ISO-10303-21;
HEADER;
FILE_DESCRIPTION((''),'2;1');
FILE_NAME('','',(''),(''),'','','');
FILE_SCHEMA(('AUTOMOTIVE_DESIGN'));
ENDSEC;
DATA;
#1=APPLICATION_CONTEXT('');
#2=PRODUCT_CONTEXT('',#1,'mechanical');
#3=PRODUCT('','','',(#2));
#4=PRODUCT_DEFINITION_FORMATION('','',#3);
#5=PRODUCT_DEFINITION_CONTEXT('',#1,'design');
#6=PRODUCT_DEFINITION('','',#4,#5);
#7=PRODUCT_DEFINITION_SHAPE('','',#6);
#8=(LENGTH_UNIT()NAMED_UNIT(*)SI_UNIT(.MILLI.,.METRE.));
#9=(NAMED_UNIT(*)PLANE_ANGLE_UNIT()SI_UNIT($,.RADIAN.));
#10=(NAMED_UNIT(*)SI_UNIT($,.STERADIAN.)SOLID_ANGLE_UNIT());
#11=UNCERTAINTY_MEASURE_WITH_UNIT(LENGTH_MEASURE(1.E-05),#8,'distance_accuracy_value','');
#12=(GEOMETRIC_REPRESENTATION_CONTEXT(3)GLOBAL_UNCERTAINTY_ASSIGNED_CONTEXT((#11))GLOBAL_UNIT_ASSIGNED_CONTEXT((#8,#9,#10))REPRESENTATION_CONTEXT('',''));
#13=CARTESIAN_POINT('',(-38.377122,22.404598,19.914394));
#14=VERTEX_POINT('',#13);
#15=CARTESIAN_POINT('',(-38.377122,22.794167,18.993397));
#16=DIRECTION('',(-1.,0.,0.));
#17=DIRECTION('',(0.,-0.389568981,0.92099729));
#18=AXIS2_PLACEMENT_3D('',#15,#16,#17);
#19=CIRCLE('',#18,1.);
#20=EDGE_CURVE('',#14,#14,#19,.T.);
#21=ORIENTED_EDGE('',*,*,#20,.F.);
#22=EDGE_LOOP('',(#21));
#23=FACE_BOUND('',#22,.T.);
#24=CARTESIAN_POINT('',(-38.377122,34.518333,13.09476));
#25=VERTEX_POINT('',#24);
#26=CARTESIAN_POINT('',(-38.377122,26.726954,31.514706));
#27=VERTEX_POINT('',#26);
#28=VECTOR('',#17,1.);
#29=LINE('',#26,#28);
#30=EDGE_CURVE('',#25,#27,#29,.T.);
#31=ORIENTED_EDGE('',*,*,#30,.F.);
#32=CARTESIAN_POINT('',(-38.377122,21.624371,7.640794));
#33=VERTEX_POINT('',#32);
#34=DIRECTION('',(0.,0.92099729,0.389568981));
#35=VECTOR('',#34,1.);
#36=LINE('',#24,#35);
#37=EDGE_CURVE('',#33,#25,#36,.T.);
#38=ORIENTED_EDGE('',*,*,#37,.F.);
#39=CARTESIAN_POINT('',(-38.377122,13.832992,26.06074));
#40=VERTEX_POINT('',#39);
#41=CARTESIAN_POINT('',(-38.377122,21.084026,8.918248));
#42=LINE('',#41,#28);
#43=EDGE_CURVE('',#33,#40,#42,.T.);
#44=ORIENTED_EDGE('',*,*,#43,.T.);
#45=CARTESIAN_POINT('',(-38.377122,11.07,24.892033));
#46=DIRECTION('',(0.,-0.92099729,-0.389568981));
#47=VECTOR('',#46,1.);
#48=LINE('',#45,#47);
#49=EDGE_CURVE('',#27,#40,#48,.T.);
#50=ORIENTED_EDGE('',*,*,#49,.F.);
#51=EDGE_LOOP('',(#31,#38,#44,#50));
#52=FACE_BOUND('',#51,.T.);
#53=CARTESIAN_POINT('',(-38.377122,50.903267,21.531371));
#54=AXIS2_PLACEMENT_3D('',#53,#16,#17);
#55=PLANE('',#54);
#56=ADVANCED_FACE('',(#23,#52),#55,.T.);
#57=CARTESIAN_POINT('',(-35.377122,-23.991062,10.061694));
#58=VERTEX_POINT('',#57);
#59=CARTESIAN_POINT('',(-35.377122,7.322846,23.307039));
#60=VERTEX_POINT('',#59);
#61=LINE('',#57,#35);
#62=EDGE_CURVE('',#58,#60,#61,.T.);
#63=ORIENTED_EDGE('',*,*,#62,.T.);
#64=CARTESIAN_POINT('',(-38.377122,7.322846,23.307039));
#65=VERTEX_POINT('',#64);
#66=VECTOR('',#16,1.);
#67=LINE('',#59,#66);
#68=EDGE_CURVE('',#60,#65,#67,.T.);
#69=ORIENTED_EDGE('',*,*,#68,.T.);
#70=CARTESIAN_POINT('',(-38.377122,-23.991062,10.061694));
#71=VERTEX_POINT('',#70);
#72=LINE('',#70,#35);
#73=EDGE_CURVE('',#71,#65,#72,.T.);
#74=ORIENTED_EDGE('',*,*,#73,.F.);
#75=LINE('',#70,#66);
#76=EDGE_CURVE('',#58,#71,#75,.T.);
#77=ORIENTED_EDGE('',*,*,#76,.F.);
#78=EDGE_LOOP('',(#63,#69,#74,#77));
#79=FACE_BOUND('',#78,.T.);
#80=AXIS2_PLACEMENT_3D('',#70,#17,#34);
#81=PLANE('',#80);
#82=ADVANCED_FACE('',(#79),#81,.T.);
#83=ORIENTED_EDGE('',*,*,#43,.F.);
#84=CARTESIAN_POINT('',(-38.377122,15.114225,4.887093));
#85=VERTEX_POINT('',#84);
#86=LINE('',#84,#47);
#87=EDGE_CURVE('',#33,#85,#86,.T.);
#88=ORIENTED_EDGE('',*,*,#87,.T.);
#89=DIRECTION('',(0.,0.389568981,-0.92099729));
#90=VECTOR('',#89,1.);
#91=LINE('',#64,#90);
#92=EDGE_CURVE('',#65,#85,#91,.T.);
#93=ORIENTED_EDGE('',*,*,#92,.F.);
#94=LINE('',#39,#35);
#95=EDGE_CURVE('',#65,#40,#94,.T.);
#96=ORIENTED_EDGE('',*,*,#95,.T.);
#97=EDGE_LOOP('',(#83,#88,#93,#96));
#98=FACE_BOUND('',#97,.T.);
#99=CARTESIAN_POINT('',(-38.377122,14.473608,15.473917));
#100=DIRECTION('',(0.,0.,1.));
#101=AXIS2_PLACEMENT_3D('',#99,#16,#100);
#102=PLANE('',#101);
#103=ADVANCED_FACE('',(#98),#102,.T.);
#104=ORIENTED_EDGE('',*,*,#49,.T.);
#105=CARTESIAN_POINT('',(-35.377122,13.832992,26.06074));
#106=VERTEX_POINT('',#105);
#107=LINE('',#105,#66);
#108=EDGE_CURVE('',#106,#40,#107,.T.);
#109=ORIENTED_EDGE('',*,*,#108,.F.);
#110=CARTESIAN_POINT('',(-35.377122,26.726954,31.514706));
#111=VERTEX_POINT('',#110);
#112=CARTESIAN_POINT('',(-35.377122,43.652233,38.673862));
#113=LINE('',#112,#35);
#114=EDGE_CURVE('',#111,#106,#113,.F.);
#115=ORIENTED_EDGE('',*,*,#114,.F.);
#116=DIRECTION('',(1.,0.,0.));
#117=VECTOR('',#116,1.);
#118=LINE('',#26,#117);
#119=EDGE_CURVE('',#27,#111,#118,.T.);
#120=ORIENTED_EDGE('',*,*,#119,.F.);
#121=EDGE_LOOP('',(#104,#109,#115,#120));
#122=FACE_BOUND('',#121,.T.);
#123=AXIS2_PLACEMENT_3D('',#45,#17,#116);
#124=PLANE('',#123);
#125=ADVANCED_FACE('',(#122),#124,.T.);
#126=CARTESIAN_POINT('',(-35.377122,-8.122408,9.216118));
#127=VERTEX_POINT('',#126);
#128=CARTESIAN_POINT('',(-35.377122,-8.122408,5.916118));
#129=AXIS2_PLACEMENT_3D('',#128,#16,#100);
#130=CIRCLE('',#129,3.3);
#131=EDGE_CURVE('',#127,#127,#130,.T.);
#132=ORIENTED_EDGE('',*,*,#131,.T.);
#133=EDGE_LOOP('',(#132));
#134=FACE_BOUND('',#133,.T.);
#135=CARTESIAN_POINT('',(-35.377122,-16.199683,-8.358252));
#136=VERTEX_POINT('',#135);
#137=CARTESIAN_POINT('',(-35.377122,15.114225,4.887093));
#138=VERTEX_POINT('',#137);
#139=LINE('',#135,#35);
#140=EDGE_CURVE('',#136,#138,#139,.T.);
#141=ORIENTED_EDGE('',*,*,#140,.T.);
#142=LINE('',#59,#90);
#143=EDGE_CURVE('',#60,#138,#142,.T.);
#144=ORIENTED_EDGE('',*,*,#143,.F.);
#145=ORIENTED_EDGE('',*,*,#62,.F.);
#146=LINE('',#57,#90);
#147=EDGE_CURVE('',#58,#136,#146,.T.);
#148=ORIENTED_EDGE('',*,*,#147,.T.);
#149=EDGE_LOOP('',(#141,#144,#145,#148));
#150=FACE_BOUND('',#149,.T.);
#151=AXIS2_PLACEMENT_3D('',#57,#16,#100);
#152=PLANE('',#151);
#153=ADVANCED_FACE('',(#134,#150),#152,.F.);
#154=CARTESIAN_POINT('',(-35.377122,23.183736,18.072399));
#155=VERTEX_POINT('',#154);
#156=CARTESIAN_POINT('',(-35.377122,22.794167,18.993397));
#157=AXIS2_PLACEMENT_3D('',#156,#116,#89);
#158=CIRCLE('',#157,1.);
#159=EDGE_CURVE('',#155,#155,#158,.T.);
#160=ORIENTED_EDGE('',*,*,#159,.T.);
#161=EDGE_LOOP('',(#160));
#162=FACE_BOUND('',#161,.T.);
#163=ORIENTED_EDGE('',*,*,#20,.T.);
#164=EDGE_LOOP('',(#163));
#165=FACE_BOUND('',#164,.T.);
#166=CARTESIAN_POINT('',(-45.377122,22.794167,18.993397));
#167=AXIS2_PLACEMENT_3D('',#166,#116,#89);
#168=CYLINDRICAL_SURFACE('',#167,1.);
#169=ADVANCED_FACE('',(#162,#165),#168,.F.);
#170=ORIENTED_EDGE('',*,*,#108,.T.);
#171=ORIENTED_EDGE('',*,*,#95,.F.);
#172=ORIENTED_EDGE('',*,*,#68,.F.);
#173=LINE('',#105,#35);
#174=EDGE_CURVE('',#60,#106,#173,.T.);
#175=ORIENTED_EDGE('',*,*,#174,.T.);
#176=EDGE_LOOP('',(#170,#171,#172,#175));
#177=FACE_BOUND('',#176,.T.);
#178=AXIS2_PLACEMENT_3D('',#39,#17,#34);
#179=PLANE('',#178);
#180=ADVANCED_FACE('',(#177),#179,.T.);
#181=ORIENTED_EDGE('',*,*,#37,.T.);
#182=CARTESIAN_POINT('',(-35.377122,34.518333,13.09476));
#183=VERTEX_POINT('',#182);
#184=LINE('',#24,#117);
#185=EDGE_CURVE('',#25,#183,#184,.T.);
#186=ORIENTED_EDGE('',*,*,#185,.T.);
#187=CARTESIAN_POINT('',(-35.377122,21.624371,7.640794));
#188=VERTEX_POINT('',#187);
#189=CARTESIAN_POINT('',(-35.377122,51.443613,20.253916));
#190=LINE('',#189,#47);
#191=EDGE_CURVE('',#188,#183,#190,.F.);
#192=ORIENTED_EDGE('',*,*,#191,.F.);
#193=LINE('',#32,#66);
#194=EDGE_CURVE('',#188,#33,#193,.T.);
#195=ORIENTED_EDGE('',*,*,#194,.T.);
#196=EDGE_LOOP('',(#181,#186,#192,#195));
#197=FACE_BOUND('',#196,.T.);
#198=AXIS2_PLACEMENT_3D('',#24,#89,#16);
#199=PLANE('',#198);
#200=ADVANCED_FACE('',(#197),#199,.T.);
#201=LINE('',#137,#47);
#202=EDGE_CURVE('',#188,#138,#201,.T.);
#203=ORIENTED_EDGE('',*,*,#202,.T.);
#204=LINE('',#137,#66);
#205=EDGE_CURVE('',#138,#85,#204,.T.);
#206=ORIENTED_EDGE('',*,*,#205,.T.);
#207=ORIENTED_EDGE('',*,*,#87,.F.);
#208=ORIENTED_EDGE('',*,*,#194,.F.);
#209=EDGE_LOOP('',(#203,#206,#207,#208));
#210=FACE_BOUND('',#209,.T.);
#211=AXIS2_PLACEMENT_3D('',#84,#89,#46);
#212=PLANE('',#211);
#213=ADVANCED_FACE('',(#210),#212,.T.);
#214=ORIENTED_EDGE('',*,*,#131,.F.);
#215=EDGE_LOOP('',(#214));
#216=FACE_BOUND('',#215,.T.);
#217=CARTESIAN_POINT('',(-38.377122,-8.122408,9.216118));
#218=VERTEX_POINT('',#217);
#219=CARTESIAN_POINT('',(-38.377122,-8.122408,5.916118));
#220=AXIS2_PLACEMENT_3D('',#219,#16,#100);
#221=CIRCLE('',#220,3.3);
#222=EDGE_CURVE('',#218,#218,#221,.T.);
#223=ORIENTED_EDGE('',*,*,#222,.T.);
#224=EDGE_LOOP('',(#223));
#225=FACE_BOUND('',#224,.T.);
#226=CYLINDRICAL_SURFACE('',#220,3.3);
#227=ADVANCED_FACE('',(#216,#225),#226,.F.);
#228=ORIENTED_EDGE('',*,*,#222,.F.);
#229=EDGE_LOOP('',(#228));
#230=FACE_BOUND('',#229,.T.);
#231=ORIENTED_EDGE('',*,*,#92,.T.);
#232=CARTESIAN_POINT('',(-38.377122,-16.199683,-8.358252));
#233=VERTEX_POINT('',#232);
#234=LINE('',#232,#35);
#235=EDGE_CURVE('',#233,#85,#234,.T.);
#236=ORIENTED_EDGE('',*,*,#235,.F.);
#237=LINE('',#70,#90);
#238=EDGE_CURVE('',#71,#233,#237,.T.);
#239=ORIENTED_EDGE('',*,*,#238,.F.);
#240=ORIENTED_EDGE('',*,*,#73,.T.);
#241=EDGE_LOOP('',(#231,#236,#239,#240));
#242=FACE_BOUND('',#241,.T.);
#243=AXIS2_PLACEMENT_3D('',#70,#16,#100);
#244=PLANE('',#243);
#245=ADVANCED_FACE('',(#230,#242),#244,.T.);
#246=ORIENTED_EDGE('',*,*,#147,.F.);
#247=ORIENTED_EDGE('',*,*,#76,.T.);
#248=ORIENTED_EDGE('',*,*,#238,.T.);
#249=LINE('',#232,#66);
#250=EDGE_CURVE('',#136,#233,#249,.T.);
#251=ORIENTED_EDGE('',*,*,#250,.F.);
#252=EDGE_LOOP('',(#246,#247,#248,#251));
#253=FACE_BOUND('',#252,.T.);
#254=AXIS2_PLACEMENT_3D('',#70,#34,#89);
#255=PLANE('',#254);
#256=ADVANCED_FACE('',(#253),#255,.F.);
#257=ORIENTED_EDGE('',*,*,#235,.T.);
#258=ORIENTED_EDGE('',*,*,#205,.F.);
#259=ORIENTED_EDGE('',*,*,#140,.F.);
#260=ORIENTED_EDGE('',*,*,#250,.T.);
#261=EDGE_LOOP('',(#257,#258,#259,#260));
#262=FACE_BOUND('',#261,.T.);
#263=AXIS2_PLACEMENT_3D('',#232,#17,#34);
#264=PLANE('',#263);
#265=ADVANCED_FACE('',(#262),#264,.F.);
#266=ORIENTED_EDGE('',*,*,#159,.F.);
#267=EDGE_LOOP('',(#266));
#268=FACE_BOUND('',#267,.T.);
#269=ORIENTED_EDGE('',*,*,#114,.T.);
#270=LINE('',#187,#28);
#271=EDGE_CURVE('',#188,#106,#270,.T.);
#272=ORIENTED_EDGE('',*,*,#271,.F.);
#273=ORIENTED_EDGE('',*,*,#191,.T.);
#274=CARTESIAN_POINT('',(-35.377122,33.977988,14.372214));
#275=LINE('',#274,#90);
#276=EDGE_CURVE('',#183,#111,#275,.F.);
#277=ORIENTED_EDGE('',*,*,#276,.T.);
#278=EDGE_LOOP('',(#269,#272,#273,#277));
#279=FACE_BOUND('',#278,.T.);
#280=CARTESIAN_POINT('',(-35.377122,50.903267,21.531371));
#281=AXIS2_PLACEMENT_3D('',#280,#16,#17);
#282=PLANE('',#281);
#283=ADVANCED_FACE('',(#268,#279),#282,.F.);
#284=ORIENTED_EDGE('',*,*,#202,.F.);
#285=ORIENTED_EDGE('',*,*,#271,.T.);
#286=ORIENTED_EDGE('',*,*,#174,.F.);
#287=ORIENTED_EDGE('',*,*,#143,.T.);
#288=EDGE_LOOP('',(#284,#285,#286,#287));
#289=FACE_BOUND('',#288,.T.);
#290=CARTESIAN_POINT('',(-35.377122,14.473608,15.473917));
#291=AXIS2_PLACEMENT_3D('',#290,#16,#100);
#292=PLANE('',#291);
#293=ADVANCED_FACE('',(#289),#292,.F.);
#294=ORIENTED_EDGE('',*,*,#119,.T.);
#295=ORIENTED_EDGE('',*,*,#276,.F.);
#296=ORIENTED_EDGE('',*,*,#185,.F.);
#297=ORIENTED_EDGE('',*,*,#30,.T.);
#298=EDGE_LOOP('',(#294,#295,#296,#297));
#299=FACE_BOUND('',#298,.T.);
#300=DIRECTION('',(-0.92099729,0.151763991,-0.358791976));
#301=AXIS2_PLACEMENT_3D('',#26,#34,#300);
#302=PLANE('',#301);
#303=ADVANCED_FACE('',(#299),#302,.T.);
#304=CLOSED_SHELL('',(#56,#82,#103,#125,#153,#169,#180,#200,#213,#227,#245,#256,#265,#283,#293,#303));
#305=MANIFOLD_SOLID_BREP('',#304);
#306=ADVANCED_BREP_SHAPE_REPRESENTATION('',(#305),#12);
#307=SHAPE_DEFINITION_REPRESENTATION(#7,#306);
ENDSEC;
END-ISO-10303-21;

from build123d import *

# Parameters (mm, degrees)
SKETCH1_W                      = 3
SKETCH1_H                      = 40
BOSS_EXTRUDE1_DEPTH            = 20
SKETCH7_R                      = 3.3
M6_CLEARANCE_6_6_MM_THRU_DEPTH = 20
EDGE_FLANGE2_STRIP_W           = 18
EDGE_FLANGE2_STRIP_H           = 3
EDGE_FLANGE2_STRIP_CUT_DEPTH   = 20
EDGE_FLANGE2_DEPTH             = 20
SKETCH21_R                     = 1
CUT_EXTRUDE4_DEPTH             = 10
UNFOLD1_START                  = -35.37712158
UNFOLD1_DEPTH                  = 17
UNFOLD1_START_2                = -38.37712158
UNFOLD1_2_OUTLINE_R            = 1
UNFOLD1_2_DEPTH                = 3


with BuildPart() as part:
    # Sketch1 → Boss-Extrude1 (new body)
    with BuildSketch(Plane(origin=(0, 0.540345249, -1.277454147), x_dir=(-1, 0, 0), z_dir=(0, 0.3895689809965895, -0.9209972904657642))):
        with Locations((36.87712158, 1.824020416)):
            Rectangle(SKETCH1_W, SKETCH1_H)
    extrude(amount=-BOSS_EXTRUDE1_DEPTH)

    # Sketch7 → M6 clearance - 6.6 mm -thru (cut)
    with BuildSketch(Plane.ZY.offset(38.37712158)):
        with Locations((5.916117666, -8.122407734)):
            Circle(SKETCH7_R)
    extrude(amount=-M6_CLEARANCE_6_6_MM_THRU_DEPTH, mode=Mode.SUBTRACT)

    # Edge-Flange2: sheet metal written as solids
    # Edge-Flange2 strip (on a plane across the edge) → Edge-Flange2 strip cut (cut)
    with BuildSketch(Plane(origin=(-35.37712158, 20.640208919, 7.224507248), x_dir=(3.4914813388431334e-15, -0.9209972904657641, -0.3895689809965894), z_dir=(0, -0.3895689809965894, 0.9209972904657641))):
        with Locations((-3, -1.5)):
            Rectangle(EDGE_FLANGE2_STRIP_W, EDGE_FLANGE2_STRIP_H)
    extrude(amount=EDGE_FLANGE2_STRIP_CUT_DEPTH, mode=Mode.SUBTRACT)

    # Edge-Flange2 section (on a plane across the edge) → Edge-Flange2 (add)
    with BuildSketch(Plane(origin=(-35.37712158, 20.640208919, 7.224507248), x_dir=(3.4914813388431334e-15, -0.9209972904657641, -0.3895689809965894), z_dir=(0, -0.3895689809965894, 0.9209972904657641))):
        with BuildLine():
            Line((0, 3), (0, 17))
            Line((0, 17), (3, 17))
            Line((3, 17), (3, 3))
            ThreePointArc((3, 3), (3.878679656, 0.878679656), (6, 0))
            Line((6, 0), (6, -3))
            ThreePointArc((6, -3), (1.757359313, -1.242640687), (0, 3))
        make_face()
    extrude(amount=EDGE_FLANGE2_DEPTH)

    # Sketch21 → Cut-Extrude4 (cut)
    with BuildSketch(Plane(origin=(0, 17.336871798, 7.333254452), x_dir=(-0.3895689809965894, 0.3587919759473664, -0.8482360090452796), z_dir=(3.608224830031759e-15, -0.9209972904657642, -0.3895689809965895))):
        with Locations(Location((2.537974108, -28.109100712, 0), (0, 0, 22.927682802))):
            Circle(SKETCH21_R)
    extrude(amount=-CUT_EXTRUDE4_DEPTH, mode=Mode.SUBTRACT)

    # Unfold1: read off the stored shape, not the designer's step
    # Unfold1 outline → Unfold1 (cut)
    with BuildSketch(Plane.YZ.offset(UNFOLD1_START)):
        Polygon((20.640208919, 7.224507248), (12.848829299, 25.644453057), (7.322845556, 23.307039171), (15.114225176, 4.887093362), align=None)
    extrude(amount=UNFOLD1_DEPTH, mode=Mode.SUBTRACT)

    # Unfold1 2 outline → Unfold1 2 (add)
    with BuildSketch(Plane.YZ.offset(UNFOLD1_START_2)):
        Polygon((34.518333466, 13.094759956), (26.726953846, 31.514705765), (7.322845556, 23.307039171), (15.114225176, 4.887093362), align=None)
        with Locations((22.794166687, 18.993396522)):
            Circle(UNFOLD1_2_OUTLINE_R, mode=Mode.SUBTRACT)
    extrude(amount=UNFOLD1_2_DEPTH)


solid = part.part
